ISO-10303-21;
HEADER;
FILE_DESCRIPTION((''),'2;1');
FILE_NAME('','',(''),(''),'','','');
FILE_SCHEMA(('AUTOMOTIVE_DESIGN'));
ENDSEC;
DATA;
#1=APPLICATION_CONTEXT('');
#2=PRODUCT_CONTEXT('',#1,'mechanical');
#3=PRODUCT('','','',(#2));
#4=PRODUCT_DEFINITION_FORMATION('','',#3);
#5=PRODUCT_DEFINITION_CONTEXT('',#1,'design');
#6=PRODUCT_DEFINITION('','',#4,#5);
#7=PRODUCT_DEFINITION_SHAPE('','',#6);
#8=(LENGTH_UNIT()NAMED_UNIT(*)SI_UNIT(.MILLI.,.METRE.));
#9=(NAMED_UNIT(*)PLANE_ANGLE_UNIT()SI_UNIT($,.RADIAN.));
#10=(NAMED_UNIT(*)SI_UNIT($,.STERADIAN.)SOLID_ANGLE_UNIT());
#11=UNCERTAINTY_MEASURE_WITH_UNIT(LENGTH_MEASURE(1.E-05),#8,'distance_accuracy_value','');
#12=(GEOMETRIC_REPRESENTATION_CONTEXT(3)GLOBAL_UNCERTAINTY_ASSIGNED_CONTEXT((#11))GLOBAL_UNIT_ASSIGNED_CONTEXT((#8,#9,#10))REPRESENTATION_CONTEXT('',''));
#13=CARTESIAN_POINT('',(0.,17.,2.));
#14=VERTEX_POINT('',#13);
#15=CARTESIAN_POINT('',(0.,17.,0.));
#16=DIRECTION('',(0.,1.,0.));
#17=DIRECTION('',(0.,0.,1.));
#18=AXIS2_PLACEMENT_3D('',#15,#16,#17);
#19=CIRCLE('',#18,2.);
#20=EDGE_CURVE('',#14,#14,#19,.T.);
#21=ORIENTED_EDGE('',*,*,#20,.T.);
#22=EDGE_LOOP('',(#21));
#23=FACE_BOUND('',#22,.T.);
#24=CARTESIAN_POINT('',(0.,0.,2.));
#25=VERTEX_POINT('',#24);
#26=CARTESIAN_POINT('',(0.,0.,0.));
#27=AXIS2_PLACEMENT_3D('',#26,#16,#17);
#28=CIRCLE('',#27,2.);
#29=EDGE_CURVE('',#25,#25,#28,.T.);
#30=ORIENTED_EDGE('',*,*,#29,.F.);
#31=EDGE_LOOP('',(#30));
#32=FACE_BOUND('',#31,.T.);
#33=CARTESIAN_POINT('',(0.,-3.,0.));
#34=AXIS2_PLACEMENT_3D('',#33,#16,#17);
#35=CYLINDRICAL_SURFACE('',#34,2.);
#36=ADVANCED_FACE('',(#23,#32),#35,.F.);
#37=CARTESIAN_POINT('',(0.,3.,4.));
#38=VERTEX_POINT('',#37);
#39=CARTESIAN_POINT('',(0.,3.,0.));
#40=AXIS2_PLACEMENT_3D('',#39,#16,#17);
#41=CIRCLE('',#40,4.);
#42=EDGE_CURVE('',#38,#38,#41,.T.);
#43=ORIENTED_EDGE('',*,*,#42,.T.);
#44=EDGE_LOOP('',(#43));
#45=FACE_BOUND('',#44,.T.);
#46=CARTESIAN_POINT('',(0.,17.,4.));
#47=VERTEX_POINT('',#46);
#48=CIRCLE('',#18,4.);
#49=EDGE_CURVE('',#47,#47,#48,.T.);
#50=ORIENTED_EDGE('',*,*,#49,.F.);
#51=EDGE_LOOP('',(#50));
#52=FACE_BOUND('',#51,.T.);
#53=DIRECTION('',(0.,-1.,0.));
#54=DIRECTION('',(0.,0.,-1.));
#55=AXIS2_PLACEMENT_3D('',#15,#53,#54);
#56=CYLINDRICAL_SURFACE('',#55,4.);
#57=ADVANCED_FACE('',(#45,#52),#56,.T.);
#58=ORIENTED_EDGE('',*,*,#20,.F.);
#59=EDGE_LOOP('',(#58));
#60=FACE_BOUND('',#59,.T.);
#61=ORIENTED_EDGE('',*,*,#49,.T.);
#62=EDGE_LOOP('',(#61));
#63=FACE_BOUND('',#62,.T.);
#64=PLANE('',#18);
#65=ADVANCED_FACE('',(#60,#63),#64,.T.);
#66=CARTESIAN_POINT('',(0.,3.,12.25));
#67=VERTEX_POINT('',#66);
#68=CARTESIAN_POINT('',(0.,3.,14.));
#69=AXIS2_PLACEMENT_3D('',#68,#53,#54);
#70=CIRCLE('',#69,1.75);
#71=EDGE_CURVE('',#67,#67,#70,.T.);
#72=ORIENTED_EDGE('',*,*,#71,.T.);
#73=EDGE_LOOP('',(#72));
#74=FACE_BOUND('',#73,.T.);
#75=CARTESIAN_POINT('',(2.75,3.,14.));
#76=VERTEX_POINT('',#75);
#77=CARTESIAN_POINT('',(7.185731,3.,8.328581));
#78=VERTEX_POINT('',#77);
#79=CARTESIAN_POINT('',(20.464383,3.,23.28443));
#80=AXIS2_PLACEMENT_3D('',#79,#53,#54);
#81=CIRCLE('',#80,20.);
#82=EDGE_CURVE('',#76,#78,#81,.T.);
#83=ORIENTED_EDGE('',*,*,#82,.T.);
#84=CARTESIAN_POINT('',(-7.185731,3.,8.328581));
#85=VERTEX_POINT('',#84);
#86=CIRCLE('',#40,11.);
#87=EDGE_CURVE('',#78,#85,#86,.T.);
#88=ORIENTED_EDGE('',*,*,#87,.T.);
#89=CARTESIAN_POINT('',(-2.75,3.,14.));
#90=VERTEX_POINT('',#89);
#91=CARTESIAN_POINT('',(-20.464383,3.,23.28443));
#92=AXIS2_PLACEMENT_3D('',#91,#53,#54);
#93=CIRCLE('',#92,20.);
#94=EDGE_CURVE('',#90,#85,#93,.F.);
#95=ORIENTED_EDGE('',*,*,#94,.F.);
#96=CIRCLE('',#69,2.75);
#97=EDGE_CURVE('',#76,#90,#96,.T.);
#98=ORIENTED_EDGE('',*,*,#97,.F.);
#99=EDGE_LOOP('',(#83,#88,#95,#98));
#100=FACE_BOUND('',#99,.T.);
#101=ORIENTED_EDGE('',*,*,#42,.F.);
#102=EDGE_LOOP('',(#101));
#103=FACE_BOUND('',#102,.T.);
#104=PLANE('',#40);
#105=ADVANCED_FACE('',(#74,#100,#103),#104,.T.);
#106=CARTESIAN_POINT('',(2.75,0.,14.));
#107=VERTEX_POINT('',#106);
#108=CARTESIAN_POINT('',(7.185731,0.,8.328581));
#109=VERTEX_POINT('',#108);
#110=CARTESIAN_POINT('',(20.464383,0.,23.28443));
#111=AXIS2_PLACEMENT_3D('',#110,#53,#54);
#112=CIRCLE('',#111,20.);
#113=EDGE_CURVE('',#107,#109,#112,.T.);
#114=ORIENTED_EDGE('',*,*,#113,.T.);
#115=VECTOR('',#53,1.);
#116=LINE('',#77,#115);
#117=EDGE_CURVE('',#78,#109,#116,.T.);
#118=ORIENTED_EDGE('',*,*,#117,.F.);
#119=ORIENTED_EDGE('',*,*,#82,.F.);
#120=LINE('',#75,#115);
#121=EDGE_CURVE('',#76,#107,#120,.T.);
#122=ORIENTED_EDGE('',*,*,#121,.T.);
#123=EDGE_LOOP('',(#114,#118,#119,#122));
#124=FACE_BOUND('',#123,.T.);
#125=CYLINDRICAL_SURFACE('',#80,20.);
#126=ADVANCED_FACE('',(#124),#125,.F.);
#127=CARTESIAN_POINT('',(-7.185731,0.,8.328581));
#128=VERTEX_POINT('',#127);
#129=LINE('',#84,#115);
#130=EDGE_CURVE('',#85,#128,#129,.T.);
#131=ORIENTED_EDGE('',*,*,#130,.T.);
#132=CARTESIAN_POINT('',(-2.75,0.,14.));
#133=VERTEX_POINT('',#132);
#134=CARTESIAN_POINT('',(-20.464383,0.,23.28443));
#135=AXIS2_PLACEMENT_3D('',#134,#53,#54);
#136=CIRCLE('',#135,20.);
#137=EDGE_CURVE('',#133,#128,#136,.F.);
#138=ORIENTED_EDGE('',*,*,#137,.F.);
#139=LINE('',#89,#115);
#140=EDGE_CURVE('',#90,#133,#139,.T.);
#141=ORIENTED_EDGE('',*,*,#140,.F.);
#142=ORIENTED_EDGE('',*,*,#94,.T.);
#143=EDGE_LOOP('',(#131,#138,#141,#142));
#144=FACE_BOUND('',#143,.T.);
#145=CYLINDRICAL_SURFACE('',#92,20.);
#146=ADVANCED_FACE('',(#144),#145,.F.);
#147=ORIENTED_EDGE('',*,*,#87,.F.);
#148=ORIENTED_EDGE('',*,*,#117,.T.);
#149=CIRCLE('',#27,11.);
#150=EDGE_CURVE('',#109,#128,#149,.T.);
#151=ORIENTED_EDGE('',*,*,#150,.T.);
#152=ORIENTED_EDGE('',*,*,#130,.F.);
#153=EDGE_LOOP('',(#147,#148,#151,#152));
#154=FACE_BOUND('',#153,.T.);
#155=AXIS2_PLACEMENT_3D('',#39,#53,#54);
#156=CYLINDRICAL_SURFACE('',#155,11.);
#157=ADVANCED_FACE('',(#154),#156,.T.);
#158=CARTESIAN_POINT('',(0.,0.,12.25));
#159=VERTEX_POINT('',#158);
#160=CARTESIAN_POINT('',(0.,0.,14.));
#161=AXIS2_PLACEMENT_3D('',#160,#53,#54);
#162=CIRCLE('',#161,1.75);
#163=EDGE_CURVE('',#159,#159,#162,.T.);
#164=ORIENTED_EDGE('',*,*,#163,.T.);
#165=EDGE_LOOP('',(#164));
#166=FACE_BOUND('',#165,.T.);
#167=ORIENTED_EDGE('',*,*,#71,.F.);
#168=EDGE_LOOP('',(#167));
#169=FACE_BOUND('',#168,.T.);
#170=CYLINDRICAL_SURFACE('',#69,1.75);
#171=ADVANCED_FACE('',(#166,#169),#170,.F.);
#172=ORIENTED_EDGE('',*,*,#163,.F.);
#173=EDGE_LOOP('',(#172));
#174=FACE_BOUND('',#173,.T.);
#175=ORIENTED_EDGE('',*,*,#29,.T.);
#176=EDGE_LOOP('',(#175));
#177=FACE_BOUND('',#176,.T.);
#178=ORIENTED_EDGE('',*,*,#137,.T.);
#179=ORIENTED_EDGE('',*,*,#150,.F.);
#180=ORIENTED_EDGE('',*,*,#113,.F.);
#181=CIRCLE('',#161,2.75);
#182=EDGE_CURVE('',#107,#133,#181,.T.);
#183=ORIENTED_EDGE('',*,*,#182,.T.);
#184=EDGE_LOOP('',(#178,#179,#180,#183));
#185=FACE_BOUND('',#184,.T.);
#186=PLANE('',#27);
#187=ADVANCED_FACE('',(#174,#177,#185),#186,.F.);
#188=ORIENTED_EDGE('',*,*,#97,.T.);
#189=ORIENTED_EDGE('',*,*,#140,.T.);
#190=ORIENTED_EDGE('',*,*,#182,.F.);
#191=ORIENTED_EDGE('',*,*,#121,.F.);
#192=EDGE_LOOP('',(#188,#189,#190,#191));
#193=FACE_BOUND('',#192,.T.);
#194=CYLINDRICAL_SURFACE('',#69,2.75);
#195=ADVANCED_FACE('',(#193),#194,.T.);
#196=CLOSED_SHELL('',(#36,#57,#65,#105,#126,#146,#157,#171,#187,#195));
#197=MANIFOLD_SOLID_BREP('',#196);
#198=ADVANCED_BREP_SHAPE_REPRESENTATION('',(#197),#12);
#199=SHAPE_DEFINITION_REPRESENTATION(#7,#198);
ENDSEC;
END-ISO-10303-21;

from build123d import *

# Parameters (mm, degrees)
SKETCH1_R               = 11
BOSS_EXTRUDE1_DEPTH     = 3
SKETCH2_R               = 4
BOSS_EXTRUDE2_DEPTH     = 14
SKETCH3_R               = 2
CUT_EXTRUDE1_DEPTH      = 20
BOSS_EXTRUDE3_START     = -3
BOSS_EXTRUDE3_OUTLINE_R = 1.75
BOSS_EXTRUDE3_DEPTH     = 3


# Read off the part's stored shape, not the designer's step: Boss-Extrude3
with BuildPart() as part:
    # Sketch1 → Boss-Extrude1 (new body)
    with BuildSketch(Plane(origin=(0, 0, 0), x_dir=(1, 0, 0), z_dir=(0, 1, 0))):
        with Locations(Location((0, 0, 0), (0, 0, 270))):
            Circle(SKETCH1_R)
    extrude(amount=BOSS_EXTRUDE1_DEPTH)

    # Sketch2 → Boss-Extrude2 (add)
    with BuildSketch(Plane(origin=(0, 3, 0), x_dir=(1, 0, 0), z_dir=(0, 1, 0))):
        with Locations(Location((0, 0, 0), (0, 0, 270))):
            Circle(SKETCH2_R)
    extrude(amount=BOSS_EXTRUDE2_DEPTH)

    # Sketch3 → Cut-Extrude1 (cut)
    with BuildSketch(Plane(origin=(0, 17, 0), x_dir=(1, 0, 0), z_dir=(0, 1, 0))):
        with Locations(Location((0, 0, 0), (0, 0, 270))):
            Circle(SKETCH3_R)
    extrude(amount=-CUT_EXTRUDE1_DEPTH, mode=Mode.SUBTRACT)

    # Boss-Extrude3 outline → Boss-Extrude3 (add)
    with BuildSketch(Plane.XZ.offset(BOSS_EXTRUDE3_START)):
        with BuildLine():
            ThreePointArc((-2.75, 14), (-4.710548646, 10.963037737), (-7.185731367, 8.328581195))
            ThreePointArc((-7.185731367, 8.328581195), (0, 11), (7.185731367, 8.328581195))
            ThreePointArc((7.185731367, 8.328581195), (4.710548646, 10.963037737), (2.75, 14))
            ThreePointArc((2.75, 14), (0, 16.75), (-2.75, 14))
        make_face()
        with Locations((0, 14)):
            Circle(BOSS_EXTRUDE3_OUTLINE_R, mode=Mode.SUBTRACT)
    extrude(amount=BOSS_EXTRUDE3_DEPTH)


solid = part.part
